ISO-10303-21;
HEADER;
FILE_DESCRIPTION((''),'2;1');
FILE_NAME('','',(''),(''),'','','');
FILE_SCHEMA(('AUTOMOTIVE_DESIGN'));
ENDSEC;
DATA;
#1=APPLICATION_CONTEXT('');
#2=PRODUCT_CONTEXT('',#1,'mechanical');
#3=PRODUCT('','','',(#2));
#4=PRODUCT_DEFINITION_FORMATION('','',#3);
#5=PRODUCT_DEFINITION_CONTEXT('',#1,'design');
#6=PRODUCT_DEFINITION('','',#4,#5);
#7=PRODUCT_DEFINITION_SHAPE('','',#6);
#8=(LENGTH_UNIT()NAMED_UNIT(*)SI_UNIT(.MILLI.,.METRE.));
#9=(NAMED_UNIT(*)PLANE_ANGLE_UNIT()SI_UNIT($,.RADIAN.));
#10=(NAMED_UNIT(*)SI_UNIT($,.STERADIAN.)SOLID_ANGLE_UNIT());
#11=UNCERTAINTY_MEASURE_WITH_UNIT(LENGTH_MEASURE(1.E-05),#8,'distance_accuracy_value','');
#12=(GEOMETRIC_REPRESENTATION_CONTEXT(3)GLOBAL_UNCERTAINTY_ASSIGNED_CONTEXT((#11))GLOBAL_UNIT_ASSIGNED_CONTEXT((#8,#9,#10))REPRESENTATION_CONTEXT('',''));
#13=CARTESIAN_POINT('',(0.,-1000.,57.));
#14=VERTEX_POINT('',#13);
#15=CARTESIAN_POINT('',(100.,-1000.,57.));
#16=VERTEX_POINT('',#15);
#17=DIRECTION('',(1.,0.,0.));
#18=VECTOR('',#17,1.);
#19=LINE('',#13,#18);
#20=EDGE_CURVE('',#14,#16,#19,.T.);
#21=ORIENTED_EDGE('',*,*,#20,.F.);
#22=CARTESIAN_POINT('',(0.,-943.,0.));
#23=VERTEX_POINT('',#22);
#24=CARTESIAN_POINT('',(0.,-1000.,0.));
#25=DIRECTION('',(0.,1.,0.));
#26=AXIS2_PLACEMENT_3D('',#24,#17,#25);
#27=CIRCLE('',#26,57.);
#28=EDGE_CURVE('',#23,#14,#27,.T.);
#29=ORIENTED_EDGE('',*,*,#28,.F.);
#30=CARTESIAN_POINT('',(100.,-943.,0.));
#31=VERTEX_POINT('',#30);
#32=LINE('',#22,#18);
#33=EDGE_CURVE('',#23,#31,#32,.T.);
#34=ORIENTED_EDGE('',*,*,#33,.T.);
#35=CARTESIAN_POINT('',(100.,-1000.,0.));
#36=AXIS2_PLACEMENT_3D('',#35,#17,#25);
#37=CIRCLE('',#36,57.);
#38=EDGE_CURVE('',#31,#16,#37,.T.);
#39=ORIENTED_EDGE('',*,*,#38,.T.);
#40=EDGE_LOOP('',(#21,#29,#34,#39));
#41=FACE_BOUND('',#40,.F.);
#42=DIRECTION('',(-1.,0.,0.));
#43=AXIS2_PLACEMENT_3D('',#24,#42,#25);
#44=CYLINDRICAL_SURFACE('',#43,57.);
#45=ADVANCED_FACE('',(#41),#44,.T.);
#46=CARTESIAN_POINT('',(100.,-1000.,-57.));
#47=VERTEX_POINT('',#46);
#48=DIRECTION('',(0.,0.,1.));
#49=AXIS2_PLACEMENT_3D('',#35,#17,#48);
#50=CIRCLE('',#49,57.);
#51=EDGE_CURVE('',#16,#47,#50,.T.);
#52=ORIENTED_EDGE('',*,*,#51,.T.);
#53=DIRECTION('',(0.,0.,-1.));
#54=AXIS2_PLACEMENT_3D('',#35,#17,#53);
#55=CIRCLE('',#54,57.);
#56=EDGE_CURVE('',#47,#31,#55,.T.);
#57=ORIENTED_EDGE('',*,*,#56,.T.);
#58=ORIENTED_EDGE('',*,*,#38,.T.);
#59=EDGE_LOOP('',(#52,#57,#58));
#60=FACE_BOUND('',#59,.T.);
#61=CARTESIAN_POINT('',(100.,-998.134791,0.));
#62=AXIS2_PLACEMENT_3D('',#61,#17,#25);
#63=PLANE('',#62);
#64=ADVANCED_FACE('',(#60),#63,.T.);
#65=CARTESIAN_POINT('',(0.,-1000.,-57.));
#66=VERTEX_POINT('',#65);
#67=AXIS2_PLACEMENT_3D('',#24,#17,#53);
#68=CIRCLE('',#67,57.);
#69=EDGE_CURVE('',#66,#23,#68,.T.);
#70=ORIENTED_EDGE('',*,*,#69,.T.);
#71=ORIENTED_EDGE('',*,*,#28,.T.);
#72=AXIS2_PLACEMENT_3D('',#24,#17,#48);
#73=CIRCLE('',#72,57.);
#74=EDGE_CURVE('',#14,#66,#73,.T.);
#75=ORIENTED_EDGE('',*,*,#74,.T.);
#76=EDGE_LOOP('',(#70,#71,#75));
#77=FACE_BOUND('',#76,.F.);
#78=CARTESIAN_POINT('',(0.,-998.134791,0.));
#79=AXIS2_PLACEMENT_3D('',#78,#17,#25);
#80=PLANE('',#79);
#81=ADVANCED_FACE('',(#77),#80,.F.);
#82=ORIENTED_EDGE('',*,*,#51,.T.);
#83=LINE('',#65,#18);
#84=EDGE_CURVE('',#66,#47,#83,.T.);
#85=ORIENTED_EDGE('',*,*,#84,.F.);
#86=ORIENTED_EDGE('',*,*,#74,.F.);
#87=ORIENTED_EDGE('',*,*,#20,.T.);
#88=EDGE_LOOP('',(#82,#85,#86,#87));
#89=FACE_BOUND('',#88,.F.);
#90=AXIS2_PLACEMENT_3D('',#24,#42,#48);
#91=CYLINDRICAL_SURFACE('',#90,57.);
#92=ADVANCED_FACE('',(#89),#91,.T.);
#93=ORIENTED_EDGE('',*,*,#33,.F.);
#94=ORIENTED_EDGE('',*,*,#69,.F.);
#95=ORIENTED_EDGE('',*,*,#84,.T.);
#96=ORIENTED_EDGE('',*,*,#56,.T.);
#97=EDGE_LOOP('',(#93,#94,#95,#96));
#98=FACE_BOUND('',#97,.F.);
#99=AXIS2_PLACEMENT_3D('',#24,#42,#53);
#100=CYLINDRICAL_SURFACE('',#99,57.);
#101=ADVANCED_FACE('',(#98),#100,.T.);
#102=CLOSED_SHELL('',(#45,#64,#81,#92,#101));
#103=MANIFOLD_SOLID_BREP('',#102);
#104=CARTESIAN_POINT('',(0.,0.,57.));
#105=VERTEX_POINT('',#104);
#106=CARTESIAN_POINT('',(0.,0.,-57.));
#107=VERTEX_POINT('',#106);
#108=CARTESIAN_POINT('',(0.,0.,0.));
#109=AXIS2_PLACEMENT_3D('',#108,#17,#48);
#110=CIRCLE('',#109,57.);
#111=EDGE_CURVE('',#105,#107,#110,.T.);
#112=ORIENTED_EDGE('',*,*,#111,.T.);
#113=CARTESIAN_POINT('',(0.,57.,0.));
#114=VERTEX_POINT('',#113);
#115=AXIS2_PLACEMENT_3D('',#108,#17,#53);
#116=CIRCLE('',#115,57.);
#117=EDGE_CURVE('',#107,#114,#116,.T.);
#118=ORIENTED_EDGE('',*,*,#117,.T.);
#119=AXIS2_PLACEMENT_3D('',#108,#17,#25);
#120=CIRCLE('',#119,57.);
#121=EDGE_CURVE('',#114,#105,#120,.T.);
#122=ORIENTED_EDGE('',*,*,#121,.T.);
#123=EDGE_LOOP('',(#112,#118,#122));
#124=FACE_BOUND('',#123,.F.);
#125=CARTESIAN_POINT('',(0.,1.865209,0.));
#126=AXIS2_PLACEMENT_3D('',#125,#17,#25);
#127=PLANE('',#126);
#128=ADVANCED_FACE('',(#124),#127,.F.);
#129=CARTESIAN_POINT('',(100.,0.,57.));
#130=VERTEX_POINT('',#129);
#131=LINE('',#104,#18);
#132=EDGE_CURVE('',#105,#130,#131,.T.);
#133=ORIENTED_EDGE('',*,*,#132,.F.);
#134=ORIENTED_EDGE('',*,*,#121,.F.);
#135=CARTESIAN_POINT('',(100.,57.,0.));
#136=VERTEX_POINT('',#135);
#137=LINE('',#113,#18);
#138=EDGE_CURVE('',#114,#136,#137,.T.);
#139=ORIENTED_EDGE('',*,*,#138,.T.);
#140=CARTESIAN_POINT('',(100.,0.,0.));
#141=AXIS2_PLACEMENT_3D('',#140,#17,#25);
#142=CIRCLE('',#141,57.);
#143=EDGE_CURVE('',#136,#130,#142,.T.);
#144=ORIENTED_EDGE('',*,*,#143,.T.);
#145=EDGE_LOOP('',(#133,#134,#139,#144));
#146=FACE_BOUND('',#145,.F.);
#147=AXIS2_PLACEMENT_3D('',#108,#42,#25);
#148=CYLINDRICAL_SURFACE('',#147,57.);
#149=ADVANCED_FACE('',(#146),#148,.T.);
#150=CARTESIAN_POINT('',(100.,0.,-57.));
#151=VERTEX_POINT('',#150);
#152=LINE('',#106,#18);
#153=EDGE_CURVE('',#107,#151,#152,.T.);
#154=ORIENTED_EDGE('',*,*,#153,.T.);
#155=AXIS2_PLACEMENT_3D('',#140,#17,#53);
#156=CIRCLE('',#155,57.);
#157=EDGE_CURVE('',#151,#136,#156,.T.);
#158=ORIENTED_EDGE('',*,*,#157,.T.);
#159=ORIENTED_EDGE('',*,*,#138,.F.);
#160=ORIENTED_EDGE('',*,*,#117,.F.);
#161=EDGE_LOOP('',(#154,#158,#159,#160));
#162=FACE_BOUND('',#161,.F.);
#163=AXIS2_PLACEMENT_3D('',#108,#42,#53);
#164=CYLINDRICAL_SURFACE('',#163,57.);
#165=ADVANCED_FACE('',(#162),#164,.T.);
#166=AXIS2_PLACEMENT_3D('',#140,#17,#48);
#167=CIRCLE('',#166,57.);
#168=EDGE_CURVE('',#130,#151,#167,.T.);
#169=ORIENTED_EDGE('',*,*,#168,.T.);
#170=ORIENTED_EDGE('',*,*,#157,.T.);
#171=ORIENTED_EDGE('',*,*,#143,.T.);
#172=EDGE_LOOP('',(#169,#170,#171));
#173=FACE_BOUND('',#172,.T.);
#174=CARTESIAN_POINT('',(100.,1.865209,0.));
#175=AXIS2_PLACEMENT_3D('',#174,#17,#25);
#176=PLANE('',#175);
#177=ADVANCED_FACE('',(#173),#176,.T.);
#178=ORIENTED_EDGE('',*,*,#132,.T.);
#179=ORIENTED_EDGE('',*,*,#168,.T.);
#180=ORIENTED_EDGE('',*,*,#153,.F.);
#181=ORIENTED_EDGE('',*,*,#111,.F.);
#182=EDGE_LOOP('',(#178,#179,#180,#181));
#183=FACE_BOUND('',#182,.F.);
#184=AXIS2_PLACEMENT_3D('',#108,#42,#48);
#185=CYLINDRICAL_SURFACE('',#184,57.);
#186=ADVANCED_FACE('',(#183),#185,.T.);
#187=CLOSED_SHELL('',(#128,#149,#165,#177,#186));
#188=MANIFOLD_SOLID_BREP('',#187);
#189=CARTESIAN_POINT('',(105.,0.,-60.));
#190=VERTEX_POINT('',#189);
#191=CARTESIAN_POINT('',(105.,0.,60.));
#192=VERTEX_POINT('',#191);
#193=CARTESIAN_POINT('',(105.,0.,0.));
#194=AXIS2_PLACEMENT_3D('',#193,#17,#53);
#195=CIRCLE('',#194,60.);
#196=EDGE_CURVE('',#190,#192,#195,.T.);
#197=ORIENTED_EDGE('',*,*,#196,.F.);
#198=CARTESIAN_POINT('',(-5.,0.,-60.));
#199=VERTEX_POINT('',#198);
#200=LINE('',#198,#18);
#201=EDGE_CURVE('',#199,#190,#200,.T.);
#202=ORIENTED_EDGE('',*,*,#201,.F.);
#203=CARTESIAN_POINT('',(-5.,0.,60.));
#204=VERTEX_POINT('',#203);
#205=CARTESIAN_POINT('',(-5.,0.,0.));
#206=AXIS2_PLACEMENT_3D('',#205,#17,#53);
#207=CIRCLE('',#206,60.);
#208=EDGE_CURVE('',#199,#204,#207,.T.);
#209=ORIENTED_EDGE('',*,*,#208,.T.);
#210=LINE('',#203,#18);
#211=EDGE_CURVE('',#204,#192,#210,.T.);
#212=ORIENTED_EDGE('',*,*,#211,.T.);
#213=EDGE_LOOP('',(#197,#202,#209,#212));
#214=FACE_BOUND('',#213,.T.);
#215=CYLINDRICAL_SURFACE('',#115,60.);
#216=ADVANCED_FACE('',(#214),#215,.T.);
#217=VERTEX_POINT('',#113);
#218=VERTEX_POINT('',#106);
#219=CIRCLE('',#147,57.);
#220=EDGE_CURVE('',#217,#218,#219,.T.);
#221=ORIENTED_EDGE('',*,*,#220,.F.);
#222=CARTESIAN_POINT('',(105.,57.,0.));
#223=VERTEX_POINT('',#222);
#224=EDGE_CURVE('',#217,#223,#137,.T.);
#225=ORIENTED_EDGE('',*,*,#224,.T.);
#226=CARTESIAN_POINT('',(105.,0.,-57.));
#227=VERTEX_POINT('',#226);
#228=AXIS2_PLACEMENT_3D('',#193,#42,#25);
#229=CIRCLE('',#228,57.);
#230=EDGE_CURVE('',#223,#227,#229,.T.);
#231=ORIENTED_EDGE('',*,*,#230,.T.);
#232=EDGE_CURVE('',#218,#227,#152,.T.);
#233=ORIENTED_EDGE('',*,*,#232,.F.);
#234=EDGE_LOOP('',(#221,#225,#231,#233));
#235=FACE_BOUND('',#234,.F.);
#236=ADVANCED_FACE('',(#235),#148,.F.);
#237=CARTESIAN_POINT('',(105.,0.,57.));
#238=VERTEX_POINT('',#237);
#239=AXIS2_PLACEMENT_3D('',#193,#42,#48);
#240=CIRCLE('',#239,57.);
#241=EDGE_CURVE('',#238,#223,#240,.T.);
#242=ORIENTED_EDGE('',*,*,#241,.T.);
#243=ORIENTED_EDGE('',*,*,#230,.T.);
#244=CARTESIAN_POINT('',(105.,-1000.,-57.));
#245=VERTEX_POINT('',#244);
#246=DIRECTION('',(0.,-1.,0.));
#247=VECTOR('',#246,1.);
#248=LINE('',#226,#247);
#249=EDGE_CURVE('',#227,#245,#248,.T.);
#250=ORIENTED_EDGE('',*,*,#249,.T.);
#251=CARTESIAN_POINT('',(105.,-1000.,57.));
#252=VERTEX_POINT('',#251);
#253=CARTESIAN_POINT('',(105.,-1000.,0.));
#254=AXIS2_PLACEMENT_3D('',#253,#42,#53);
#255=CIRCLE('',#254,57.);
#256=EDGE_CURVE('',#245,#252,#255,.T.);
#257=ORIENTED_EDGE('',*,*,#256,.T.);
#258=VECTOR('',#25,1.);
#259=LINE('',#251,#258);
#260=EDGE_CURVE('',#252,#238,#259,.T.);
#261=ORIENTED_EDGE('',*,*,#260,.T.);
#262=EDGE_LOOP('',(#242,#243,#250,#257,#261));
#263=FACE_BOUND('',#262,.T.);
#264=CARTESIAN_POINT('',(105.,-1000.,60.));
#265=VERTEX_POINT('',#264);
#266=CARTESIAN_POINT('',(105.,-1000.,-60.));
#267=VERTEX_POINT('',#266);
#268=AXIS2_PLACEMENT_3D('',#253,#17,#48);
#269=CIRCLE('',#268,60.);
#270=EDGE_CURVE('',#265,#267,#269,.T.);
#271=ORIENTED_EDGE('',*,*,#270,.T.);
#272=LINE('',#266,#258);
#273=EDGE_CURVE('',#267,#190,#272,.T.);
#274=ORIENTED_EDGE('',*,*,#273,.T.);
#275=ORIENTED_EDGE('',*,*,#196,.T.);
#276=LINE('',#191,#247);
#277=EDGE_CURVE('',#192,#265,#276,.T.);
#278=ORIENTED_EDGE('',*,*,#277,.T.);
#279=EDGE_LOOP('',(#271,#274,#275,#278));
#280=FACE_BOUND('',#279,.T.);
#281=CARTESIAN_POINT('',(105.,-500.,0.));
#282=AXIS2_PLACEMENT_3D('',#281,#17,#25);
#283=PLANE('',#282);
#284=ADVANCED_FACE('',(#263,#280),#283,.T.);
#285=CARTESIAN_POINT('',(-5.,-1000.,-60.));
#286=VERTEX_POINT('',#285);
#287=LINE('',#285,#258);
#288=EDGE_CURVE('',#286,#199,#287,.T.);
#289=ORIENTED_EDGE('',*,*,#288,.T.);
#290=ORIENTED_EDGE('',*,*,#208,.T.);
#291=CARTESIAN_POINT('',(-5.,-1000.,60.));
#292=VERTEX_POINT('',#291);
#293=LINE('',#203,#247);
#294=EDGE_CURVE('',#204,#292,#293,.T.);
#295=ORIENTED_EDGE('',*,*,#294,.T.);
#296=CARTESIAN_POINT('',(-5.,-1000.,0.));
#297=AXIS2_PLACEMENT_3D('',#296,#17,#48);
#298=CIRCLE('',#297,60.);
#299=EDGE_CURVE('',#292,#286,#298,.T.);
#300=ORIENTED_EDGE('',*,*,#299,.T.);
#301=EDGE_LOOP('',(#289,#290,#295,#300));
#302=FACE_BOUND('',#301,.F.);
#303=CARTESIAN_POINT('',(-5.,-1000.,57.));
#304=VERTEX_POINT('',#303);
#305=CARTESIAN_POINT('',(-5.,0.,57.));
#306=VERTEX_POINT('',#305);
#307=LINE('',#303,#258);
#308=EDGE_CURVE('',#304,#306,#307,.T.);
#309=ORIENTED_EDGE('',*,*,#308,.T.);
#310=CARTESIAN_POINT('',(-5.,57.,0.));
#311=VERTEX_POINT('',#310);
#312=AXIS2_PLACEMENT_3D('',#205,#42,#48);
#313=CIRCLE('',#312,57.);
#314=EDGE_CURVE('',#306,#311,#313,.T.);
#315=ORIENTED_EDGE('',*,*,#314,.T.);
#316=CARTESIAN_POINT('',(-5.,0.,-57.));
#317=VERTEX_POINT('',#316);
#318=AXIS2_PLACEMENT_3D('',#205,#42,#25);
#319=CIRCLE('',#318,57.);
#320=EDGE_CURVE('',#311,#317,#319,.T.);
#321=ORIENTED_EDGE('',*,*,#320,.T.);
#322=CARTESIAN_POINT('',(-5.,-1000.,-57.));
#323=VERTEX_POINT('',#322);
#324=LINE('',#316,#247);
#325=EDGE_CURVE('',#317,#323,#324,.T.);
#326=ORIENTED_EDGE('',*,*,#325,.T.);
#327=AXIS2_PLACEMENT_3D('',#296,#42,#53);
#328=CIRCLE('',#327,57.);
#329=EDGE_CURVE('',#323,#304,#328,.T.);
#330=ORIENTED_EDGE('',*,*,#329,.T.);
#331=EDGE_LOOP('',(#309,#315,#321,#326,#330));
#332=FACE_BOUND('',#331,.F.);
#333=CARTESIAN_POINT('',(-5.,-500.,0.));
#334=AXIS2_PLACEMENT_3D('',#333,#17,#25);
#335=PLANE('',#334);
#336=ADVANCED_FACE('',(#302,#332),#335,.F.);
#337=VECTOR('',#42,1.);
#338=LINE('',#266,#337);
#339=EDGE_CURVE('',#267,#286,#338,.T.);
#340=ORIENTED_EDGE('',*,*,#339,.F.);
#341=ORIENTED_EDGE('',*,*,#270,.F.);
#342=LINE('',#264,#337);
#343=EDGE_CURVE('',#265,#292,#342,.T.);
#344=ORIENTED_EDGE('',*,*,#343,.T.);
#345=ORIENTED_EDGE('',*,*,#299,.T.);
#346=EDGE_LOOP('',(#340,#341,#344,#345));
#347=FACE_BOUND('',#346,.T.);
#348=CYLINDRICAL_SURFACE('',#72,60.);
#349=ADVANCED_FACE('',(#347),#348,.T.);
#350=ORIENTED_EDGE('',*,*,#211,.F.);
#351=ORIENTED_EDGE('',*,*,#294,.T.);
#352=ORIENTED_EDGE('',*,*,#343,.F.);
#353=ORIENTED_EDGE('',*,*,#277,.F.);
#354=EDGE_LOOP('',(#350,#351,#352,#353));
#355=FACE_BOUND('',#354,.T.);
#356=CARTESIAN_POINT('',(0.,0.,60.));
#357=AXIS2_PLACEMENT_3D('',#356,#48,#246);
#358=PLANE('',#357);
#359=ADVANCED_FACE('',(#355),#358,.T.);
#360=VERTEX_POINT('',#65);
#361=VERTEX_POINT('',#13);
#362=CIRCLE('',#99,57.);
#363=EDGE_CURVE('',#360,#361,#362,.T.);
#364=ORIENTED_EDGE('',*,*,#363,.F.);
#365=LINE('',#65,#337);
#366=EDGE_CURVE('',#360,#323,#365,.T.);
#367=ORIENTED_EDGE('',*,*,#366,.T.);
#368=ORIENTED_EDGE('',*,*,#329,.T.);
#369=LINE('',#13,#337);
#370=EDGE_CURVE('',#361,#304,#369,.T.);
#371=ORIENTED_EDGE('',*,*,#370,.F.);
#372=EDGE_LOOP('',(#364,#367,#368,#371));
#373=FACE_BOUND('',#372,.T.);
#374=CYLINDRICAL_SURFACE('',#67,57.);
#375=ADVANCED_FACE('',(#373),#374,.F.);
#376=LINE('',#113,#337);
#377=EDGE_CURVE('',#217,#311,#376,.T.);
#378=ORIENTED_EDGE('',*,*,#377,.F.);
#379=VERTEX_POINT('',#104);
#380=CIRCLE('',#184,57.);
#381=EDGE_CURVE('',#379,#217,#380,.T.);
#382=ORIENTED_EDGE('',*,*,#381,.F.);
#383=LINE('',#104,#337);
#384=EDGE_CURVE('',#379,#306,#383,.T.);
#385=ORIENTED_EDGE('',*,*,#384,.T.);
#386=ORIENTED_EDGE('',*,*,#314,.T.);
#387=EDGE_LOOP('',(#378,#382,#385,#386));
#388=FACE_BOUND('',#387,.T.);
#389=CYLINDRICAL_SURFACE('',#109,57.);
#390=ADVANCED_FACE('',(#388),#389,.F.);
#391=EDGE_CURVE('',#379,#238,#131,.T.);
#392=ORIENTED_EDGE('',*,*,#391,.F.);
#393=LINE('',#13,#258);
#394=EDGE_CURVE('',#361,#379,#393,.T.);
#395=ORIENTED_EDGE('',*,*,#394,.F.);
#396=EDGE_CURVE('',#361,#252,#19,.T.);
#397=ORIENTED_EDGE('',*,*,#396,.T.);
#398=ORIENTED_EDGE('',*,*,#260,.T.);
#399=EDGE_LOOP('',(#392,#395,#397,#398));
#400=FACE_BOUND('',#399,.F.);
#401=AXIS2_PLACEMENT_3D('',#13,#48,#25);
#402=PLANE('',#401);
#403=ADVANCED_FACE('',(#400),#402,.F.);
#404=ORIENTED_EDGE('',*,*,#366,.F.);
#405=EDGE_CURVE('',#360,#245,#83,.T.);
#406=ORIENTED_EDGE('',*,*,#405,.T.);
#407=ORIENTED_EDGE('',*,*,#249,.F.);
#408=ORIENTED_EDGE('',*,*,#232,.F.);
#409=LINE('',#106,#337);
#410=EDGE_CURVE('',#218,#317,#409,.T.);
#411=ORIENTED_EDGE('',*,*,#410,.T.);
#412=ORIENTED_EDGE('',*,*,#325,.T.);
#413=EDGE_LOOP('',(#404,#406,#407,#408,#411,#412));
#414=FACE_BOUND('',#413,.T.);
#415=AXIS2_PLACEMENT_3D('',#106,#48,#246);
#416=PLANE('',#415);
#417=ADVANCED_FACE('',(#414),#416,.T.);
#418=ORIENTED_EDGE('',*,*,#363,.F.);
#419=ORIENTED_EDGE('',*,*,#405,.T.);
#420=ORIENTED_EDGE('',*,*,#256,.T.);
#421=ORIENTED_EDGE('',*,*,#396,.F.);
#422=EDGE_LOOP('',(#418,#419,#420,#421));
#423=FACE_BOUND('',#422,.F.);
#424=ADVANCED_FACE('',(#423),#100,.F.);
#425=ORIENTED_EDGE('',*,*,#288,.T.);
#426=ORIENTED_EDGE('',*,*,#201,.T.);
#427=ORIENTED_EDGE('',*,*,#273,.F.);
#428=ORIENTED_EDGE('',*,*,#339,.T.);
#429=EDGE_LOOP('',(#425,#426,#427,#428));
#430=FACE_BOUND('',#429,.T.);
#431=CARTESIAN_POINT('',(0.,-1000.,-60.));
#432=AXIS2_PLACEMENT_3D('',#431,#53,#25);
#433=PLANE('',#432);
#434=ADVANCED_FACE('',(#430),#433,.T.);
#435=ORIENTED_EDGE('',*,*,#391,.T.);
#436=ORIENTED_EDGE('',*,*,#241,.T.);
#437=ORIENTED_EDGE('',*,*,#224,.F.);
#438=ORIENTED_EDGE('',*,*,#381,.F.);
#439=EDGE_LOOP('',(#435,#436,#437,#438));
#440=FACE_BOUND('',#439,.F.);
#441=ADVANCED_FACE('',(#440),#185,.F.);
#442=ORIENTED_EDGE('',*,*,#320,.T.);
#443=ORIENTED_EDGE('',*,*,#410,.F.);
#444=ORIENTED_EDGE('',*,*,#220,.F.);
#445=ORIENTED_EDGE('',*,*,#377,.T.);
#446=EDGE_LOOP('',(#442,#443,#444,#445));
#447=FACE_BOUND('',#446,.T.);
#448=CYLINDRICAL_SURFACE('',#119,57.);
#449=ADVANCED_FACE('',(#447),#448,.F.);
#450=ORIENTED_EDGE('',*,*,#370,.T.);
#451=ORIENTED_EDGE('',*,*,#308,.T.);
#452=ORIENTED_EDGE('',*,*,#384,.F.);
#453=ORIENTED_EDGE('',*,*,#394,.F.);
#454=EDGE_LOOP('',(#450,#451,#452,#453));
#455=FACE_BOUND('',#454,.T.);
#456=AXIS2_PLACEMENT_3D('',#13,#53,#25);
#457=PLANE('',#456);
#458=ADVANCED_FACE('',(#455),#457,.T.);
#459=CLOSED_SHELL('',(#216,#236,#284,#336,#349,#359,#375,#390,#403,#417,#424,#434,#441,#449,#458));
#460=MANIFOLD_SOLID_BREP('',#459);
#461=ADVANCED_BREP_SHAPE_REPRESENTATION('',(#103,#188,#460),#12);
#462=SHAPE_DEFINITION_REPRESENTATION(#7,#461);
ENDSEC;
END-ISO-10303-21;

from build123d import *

# Parameters (mm, degrees)
F1_DEPTH = 100
F2_DEPTH = 105
F3_DEPTH = 5


with BuildPart() as f1:
    # F0 (on Right) → F1 (new body)
    with BuildSketch(Plane.YZ):
        with BuildLine():
            ThreePointArc((-943, 0), (-959.6949134724, 40.3050865276), (-1000, 57))
            ThreePointArc((-1000, 57), (-1057, 0), (-1000, -57))
            ThreePointArc((-1000, -57), (-959.6949134724, -40.3050865276), (-943, 0))
        make_face()
    extrude(amount=F1_DEPTH)


with BuildPart() as f1b:
    # F0 (on Right) → F1, piece 2 (new body)
    with BuildSketch(Plane.YZ):
        with BuildLine():
            ThreePointArc((57, 0), (40.3050865276, 40.3050865276), (0, 57))
            ThreePointArc((0, 57), (-57, 0), (0, -57))
            ThreePointArc((0, -57), (40.3050865276, -40.3050865276), (57, 0))
        make_face()
    extrude(amount=F1_DEPTH)


with BuildPart() as f2:
    # F0 (on Right) → F2 (new body)
    with BuildSketch(Plane.YZ):
        with BuildLine():
            Line((-1000, -60), (0, -60))
            ThreePointArc((0, -60), (60, 0), (0, 60))
            Line((0, 60), (-1000, 60))
            ThreePointArc((-1000, 60), (-1060, 0), (-1000, -60))
        make_face()
        with BuildLine():
            ThreePointArc((-1000, -57), (-1057, 0), (-1000, 57))
            Line((-1000, 57), (0, 57))
            ThreePointArc((0, 57), (40.3050865276, 40.3050865276), (57, 0))
            ThreePointArc((57, 0), (40.3050865276, -40.3050865276), (0, -57))
            Line((0, -57), (-1000, -57))
        make_face(mode=Mode.SUBTRACT)
    extrude(amount=F2_DEPTH)

    # F0 (on Right) → F3 (join)
    with BuildSketch(Plane.YZ):
        with BuildLine():
            Line((-1000, -60), (0, -60))
            ThreePointArc((0, -60), (60, 0), (0, 60))
            Line((0, 60), (-1000, 60))
            ThreePointArc((-1000, 60), (-1060, 0), (-1000, -60))
        make_face()
        with BuildLine():
            ThreePointArc((-1000, -57), (-1057, 0), (-1000, 57))
            Line((-1000, 57), (0, 57))
            ThreePointArc((0, 57), (40.3050865276, 40.3050865276), (57, 0))
            ThreePointArc((57, 0), (40.3050865276, -40.3050865276), (0, -57))
            Line((0, -57), (-1000, -57))
        make_face(mode=Mode.SUBTRACT)
    extrude(amount=-F3_DEPTH)


solid = Compound([f1.part, f1b.part, f2.part])
